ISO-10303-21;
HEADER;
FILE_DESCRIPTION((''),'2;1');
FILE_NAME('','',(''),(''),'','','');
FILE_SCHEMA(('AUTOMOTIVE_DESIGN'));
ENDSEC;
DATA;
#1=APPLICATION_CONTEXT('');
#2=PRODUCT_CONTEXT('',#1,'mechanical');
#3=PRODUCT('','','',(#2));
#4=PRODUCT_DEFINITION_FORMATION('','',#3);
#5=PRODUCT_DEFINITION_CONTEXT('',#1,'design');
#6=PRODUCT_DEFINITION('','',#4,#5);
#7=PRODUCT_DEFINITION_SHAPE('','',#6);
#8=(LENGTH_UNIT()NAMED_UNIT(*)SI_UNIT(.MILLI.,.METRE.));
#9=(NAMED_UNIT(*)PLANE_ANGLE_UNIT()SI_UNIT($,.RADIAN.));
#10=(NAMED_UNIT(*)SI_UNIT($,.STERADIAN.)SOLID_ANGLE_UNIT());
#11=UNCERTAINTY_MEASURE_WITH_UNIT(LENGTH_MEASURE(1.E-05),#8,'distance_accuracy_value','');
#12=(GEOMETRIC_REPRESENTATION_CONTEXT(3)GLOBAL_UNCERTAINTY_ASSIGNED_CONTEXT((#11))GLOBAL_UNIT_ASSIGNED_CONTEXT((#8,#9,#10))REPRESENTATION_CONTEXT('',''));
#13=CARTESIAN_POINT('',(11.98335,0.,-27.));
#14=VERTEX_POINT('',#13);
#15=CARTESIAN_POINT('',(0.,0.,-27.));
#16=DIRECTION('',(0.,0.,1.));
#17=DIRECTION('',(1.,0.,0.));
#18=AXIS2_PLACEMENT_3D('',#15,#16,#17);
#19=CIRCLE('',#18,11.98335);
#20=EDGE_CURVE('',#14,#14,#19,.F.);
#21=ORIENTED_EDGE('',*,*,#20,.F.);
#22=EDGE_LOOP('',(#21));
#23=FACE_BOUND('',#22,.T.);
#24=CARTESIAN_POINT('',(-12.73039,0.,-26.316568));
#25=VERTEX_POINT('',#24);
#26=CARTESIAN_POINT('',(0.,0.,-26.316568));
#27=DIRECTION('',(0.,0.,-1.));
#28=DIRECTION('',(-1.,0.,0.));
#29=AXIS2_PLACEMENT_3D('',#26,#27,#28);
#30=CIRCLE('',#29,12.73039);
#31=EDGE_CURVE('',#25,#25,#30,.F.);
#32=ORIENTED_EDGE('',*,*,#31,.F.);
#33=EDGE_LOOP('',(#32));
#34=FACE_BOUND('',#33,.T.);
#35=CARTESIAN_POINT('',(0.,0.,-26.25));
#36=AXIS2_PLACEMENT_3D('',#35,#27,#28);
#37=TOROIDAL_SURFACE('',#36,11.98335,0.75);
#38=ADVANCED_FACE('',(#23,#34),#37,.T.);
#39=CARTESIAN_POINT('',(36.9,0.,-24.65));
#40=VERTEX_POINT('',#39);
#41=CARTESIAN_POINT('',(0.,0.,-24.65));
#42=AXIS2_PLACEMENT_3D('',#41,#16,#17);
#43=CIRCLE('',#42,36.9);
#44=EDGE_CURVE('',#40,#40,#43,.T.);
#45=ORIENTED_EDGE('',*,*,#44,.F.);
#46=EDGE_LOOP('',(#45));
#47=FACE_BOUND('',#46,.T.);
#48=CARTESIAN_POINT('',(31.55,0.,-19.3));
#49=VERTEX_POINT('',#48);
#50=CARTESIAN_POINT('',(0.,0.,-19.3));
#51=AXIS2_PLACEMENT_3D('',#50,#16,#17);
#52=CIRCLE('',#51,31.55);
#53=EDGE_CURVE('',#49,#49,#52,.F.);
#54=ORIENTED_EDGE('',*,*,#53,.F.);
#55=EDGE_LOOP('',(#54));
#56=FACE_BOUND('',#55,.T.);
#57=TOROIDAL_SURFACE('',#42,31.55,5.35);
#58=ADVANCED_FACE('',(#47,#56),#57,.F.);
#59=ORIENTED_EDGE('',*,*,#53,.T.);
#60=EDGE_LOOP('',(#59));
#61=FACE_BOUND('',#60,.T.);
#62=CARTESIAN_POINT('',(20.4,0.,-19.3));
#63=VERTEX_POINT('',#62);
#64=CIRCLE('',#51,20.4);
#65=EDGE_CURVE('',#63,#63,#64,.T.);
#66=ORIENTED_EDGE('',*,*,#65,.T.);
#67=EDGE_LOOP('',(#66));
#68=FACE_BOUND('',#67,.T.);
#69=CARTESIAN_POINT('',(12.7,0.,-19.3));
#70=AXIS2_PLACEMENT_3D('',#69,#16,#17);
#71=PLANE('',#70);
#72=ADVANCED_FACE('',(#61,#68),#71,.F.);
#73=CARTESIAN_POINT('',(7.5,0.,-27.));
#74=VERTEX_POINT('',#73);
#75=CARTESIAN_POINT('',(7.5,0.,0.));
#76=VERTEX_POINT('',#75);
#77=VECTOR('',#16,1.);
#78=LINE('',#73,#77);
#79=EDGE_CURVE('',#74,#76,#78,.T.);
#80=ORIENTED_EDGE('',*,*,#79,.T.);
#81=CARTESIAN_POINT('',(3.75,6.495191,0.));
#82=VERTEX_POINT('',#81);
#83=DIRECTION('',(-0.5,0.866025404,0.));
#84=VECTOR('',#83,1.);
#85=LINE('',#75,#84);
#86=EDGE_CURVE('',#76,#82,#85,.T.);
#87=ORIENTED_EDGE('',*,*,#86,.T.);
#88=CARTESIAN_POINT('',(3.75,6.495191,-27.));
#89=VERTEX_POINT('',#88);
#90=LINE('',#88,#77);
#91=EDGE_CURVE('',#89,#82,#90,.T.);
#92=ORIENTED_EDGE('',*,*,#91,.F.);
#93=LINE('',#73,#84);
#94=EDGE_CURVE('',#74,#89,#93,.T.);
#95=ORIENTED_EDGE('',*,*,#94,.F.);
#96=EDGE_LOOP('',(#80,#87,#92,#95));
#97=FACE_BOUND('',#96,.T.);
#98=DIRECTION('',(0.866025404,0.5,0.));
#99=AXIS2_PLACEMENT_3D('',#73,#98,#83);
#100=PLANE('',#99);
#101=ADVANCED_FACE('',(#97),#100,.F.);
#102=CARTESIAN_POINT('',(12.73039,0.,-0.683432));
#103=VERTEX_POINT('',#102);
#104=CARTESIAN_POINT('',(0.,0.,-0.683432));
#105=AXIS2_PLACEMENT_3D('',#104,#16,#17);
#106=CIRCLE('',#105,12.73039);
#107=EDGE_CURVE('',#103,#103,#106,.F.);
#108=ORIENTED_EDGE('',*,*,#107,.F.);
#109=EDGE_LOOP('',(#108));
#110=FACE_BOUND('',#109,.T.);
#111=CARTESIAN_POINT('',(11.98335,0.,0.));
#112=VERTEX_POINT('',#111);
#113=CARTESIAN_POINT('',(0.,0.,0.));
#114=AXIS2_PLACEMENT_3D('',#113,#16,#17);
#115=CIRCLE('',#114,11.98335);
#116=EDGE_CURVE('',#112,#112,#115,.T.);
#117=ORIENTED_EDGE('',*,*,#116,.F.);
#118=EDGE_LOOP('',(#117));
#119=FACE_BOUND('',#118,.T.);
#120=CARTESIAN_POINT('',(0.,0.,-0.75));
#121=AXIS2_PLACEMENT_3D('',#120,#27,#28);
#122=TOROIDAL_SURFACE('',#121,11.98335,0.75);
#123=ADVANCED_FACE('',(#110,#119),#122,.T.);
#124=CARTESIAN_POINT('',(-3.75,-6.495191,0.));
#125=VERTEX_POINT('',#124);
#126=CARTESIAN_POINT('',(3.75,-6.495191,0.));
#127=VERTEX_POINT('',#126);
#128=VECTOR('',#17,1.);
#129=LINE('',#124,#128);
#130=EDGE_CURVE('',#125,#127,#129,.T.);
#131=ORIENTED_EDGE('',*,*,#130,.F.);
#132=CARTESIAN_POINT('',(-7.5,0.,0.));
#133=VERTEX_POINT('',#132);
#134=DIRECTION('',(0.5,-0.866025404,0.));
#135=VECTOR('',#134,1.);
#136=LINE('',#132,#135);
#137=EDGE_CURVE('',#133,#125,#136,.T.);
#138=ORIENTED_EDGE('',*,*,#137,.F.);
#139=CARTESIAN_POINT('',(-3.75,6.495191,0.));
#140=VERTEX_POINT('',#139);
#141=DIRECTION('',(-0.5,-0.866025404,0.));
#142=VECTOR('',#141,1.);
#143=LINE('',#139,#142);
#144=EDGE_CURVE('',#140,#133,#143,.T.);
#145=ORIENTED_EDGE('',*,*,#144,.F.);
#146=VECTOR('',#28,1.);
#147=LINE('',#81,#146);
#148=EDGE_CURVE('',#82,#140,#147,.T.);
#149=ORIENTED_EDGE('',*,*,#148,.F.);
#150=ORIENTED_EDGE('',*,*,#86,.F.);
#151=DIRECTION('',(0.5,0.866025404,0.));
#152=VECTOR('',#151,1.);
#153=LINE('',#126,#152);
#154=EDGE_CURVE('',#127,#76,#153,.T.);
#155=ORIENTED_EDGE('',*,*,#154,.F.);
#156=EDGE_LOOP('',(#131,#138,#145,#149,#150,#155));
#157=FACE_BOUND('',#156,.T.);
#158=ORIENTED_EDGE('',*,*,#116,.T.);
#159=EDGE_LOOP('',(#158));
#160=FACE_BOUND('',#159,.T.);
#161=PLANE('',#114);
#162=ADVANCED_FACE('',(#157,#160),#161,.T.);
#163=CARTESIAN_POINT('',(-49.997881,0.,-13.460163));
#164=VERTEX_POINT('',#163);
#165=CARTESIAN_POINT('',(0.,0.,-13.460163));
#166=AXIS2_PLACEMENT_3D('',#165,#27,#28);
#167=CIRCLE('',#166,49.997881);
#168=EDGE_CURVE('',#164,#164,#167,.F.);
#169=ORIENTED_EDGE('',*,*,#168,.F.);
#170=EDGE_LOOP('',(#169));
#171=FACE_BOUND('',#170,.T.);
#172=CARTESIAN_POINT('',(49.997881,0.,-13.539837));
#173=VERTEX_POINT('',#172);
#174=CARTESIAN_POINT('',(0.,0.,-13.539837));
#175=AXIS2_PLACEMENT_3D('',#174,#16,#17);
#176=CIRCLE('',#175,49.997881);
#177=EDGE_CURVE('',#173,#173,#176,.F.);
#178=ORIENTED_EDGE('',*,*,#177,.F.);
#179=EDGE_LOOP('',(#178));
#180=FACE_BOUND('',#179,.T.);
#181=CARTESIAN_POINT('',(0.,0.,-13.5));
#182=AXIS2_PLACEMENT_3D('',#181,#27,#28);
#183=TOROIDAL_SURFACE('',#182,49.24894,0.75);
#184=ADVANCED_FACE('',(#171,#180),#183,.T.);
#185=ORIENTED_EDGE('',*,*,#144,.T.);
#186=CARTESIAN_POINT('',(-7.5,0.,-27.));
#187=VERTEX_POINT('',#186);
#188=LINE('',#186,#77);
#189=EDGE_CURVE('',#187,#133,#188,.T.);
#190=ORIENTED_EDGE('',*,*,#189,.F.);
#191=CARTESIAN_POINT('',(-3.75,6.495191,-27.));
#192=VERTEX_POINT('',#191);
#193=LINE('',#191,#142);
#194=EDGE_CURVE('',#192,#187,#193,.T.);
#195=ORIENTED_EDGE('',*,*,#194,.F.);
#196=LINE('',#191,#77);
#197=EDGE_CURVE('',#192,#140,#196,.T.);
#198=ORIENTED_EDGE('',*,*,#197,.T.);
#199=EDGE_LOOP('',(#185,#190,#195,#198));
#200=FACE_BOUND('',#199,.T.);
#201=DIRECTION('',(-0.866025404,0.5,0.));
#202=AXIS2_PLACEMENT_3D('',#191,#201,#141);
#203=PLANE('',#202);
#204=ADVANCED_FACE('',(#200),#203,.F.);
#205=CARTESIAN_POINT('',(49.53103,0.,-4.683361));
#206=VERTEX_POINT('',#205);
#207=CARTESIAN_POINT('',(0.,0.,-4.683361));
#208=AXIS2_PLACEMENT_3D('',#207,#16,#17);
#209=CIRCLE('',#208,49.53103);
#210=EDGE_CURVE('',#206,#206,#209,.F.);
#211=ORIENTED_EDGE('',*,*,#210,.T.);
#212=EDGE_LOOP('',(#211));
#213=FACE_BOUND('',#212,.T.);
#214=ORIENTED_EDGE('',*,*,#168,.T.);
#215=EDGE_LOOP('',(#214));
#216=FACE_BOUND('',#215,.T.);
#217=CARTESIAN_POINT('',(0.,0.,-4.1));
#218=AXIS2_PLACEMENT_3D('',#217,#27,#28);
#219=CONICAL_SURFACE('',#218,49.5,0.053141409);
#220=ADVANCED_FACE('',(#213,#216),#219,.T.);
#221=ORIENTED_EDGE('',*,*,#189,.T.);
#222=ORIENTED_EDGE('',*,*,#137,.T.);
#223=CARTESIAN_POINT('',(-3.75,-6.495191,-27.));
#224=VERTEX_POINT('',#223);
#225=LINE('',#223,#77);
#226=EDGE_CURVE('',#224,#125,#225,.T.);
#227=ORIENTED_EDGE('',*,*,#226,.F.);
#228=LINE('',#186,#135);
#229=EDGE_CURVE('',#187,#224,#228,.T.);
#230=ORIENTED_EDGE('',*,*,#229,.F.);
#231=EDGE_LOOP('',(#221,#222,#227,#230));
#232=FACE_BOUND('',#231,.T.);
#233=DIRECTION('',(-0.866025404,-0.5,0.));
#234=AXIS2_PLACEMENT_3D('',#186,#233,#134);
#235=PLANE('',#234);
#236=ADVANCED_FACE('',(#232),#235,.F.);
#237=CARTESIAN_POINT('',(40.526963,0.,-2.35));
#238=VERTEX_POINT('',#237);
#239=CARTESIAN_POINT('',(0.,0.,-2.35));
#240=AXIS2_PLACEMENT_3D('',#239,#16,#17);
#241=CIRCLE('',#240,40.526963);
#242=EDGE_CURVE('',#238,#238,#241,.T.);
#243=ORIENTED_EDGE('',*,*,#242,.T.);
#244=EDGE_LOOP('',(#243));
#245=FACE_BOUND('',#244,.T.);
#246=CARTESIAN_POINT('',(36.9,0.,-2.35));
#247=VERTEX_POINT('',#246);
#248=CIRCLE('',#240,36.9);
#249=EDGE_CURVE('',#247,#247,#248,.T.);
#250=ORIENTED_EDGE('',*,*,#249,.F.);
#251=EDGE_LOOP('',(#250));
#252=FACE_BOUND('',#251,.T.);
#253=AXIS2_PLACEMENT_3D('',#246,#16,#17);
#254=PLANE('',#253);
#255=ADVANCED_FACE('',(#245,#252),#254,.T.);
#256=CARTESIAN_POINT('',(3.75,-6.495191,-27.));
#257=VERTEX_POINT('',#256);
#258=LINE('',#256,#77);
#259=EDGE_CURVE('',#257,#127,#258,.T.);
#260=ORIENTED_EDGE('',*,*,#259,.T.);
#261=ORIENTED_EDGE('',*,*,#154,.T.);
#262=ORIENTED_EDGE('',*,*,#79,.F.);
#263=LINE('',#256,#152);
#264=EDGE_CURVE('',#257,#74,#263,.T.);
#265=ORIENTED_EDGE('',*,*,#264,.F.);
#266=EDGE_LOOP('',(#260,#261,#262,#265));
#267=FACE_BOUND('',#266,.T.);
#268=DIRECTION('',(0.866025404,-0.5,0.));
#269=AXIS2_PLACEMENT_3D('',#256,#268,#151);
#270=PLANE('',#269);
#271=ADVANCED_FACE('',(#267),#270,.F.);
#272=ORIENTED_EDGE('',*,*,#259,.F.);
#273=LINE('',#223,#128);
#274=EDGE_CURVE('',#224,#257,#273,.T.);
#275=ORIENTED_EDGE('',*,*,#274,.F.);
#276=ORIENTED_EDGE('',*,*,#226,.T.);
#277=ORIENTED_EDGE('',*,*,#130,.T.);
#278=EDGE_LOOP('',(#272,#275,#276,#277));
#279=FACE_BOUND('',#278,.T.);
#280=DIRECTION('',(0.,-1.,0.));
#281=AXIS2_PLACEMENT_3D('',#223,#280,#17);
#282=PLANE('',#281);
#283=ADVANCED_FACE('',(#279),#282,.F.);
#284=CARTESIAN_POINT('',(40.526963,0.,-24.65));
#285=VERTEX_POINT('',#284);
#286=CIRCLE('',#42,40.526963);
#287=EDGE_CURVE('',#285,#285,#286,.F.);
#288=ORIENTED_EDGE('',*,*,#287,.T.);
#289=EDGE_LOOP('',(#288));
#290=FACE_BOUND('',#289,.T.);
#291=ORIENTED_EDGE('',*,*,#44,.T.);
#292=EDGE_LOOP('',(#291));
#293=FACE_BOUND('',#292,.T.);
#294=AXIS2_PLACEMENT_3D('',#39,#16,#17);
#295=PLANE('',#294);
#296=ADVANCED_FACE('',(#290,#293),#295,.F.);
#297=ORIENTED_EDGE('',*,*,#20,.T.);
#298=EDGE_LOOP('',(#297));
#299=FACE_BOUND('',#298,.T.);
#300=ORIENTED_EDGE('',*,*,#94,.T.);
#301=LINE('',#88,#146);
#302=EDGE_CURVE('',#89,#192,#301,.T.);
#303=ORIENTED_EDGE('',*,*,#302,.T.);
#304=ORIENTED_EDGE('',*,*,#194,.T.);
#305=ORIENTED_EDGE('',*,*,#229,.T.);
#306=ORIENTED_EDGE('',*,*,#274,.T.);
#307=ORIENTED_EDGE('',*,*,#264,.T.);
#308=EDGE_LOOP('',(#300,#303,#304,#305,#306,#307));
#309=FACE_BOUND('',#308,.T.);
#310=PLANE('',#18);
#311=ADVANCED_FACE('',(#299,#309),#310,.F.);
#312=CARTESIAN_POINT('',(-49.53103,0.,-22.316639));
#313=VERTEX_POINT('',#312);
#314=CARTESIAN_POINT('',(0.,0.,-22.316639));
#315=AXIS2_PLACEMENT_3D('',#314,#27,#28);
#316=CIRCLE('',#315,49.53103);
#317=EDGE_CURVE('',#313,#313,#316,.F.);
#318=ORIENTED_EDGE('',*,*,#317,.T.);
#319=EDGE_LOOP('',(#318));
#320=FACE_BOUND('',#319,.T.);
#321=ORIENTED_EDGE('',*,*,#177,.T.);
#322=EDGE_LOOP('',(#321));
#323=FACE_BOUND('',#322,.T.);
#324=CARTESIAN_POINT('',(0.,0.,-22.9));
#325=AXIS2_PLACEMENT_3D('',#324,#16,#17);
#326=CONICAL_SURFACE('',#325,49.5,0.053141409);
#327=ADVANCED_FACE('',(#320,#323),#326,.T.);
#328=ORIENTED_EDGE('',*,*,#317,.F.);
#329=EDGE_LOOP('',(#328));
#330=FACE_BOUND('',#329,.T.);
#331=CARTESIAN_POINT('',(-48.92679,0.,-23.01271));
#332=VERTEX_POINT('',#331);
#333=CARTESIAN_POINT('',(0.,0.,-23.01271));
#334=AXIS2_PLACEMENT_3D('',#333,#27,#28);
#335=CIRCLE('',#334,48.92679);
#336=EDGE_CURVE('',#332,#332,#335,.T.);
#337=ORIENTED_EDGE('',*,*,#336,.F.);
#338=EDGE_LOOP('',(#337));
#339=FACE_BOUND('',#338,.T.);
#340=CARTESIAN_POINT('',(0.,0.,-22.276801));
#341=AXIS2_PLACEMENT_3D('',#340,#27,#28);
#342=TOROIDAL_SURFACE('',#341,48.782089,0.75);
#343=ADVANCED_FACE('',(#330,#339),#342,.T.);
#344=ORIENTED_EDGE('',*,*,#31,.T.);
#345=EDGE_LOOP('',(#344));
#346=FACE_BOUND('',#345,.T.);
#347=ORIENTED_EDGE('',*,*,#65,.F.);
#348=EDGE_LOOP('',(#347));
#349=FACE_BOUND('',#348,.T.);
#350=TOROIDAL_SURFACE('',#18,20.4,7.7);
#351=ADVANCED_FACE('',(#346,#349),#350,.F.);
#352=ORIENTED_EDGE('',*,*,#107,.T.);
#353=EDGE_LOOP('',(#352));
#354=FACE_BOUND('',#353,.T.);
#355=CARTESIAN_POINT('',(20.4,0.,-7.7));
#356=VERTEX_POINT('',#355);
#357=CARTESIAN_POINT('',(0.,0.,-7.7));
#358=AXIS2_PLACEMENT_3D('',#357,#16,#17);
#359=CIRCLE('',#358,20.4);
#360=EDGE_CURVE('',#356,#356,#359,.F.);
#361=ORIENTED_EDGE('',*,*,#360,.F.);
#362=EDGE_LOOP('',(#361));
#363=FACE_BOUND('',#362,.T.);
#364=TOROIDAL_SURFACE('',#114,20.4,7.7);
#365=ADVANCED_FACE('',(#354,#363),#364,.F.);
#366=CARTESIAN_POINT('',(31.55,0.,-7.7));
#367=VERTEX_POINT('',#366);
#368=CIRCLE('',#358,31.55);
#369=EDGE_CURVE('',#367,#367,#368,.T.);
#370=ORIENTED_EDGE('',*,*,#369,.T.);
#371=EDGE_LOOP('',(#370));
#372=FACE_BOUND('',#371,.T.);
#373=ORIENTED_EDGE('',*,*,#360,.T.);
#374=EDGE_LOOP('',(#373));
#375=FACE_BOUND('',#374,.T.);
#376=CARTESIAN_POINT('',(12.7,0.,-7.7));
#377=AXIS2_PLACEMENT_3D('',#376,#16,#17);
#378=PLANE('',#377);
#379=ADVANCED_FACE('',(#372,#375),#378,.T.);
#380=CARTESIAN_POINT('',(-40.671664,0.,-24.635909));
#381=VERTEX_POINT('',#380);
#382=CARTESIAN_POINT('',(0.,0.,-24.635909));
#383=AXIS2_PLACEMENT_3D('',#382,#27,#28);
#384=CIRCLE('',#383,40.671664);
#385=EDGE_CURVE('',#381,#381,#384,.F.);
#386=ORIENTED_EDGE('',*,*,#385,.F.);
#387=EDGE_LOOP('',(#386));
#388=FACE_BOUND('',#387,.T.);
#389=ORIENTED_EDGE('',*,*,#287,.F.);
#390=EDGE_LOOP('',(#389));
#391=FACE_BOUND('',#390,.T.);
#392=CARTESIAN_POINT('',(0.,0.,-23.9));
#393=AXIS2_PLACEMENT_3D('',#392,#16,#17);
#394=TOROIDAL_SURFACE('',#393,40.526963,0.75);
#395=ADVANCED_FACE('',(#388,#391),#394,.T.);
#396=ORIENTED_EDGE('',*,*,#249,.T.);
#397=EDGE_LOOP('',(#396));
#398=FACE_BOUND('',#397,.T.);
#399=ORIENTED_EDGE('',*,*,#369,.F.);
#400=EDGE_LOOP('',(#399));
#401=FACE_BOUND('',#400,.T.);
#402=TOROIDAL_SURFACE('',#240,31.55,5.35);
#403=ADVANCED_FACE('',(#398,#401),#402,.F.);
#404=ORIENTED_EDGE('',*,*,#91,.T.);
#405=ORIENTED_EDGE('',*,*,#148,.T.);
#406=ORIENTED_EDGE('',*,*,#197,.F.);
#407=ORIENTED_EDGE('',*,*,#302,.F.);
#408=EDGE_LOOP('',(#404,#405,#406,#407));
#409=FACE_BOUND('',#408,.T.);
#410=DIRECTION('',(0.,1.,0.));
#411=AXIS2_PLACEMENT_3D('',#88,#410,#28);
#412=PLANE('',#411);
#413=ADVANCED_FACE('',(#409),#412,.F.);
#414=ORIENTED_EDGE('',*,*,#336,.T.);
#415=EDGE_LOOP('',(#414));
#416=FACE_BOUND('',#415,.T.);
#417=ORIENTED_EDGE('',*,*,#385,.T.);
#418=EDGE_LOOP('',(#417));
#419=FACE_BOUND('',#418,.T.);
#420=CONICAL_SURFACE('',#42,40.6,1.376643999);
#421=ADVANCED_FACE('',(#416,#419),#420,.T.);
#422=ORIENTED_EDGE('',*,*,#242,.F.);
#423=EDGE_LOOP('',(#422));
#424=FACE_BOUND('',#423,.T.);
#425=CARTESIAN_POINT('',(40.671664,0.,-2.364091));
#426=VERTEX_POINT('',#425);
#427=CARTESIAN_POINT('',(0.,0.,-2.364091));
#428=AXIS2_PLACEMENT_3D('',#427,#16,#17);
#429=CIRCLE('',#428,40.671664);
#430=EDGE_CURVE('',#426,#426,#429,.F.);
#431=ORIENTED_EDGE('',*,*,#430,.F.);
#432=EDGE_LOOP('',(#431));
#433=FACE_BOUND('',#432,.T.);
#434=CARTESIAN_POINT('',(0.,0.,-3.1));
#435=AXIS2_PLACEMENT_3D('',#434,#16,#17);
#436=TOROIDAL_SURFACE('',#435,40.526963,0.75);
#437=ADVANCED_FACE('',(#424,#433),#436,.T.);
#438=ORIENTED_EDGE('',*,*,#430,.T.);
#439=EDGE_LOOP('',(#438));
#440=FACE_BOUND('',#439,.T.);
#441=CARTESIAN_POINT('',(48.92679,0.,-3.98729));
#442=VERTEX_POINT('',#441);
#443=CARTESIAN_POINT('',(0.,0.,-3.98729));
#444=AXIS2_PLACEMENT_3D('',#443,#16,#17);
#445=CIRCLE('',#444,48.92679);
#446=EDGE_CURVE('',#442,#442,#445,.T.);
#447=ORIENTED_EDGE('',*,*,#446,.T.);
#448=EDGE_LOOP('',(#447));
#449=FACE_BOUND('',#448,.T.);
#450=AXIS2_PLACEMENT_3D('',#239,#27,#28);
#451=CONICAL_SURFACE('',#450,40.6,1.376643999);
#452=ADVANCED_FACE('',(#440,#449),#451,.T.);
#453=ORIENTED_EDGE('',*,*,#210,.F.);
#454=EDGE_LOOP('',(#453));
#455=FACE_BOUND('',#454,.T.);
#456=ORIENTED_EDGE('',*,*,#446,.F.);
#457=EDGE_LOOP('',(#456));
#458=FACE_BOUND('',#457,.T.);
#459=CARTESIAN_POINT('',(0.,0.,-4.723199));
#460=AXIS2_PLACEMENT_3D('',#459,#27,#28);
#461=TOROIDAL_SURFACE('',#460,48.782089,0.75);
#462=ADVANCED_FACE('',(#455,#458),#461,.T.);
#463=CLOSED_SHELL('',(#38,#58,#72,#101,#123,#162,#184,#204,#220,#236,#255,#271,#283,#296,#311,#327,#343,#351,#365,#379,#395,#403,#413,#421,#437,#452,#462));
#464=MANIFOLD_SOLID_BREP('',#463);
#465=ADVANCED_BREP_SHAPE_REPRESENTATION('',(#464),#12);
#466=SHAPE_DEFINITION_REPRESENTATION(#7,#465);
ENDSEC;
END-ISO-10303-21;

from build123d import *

# Parameters (mm, degrees)
FILLET1_R          = 7.7
FILLET2_R          = 5.35
FILLET3_R          = 0.75
CUT_EXTRUDE1_DEPTH = 76.688758176


with BuildPart() as part:
    # Sketch1 → Revolve1 (revolve)
    with BuildSketch(Plane(origin=(0, 0, 0), x_dir=(1, 0, 0), z_dir=(0, 1, 0))):
        Polygon((0, 0), (12.7, 0), (12.7, 7.7), (36.9, 7.7), (36.9, 2.35), (40.6, 2.35), (49.5, 4.1), (50, 13.5), (49.5, 22.9), (40.6, 24.65), (36.9, 24.65), (36.9, 19.3), (12.7, 19.3), (12.7, 27), (0, 27), align=None)
    revolve(axis=Axis((0, 0, 284.527359171), (0, 0, -1)))

    # Fillet1
    fillet1_edges = [part.edges().sort_by_distance(p)[0] for p in [
        (-12.7, 0, -7.7),
        (-12.7, 0, -19.3),
    ]]
    fillet(fillet1_edges, radius=FILLET1_R - 0.0001)  # a hair under: the kernel refuses the full size

    # Fillet2
    fillet2_edges = [part.edges().sort_by_distance(p)[0] for p in [
        (-36.9, 0, -7.7),
        (-36.9, 0, -19.3),
    ]]
    fillet(fillet2_edges, radius=FILLET2_R - 0.0001)  # a hair under: the kernel refuses the full size

    # Fillet3
    fillet3_edges = [part.edges().sort_by_distance(p)[0] for p in [
        (-49.5, 0, -22.9),
        (-50, 0, -13.5),
        (-49.5, 0, -4.1),
        (-40.6, 0, -2.35),
        (-12.7, 0, 0),
        (-12.7, 0, -27),
        (-40.6, 0, -24.65),
    ]]
    fillet(fillet3_edges, radius=FILLET3_R)

    # Sketch2 → Cut-Extrude1 (cut, through all)
    with BuildSketch(Plane.XY):
        Polygon((-3.75, 6.495190528), (-7.5, 0), (-3.75, -6.495190528), (3.75, -6.495190528), (7.5, 0), (3.75, 6.495190528), align=None)
    extrude(amount=-CUT_EXTRUDE1_DEPTH, mode=Mode.SUBTRACT)


solid = part.part
